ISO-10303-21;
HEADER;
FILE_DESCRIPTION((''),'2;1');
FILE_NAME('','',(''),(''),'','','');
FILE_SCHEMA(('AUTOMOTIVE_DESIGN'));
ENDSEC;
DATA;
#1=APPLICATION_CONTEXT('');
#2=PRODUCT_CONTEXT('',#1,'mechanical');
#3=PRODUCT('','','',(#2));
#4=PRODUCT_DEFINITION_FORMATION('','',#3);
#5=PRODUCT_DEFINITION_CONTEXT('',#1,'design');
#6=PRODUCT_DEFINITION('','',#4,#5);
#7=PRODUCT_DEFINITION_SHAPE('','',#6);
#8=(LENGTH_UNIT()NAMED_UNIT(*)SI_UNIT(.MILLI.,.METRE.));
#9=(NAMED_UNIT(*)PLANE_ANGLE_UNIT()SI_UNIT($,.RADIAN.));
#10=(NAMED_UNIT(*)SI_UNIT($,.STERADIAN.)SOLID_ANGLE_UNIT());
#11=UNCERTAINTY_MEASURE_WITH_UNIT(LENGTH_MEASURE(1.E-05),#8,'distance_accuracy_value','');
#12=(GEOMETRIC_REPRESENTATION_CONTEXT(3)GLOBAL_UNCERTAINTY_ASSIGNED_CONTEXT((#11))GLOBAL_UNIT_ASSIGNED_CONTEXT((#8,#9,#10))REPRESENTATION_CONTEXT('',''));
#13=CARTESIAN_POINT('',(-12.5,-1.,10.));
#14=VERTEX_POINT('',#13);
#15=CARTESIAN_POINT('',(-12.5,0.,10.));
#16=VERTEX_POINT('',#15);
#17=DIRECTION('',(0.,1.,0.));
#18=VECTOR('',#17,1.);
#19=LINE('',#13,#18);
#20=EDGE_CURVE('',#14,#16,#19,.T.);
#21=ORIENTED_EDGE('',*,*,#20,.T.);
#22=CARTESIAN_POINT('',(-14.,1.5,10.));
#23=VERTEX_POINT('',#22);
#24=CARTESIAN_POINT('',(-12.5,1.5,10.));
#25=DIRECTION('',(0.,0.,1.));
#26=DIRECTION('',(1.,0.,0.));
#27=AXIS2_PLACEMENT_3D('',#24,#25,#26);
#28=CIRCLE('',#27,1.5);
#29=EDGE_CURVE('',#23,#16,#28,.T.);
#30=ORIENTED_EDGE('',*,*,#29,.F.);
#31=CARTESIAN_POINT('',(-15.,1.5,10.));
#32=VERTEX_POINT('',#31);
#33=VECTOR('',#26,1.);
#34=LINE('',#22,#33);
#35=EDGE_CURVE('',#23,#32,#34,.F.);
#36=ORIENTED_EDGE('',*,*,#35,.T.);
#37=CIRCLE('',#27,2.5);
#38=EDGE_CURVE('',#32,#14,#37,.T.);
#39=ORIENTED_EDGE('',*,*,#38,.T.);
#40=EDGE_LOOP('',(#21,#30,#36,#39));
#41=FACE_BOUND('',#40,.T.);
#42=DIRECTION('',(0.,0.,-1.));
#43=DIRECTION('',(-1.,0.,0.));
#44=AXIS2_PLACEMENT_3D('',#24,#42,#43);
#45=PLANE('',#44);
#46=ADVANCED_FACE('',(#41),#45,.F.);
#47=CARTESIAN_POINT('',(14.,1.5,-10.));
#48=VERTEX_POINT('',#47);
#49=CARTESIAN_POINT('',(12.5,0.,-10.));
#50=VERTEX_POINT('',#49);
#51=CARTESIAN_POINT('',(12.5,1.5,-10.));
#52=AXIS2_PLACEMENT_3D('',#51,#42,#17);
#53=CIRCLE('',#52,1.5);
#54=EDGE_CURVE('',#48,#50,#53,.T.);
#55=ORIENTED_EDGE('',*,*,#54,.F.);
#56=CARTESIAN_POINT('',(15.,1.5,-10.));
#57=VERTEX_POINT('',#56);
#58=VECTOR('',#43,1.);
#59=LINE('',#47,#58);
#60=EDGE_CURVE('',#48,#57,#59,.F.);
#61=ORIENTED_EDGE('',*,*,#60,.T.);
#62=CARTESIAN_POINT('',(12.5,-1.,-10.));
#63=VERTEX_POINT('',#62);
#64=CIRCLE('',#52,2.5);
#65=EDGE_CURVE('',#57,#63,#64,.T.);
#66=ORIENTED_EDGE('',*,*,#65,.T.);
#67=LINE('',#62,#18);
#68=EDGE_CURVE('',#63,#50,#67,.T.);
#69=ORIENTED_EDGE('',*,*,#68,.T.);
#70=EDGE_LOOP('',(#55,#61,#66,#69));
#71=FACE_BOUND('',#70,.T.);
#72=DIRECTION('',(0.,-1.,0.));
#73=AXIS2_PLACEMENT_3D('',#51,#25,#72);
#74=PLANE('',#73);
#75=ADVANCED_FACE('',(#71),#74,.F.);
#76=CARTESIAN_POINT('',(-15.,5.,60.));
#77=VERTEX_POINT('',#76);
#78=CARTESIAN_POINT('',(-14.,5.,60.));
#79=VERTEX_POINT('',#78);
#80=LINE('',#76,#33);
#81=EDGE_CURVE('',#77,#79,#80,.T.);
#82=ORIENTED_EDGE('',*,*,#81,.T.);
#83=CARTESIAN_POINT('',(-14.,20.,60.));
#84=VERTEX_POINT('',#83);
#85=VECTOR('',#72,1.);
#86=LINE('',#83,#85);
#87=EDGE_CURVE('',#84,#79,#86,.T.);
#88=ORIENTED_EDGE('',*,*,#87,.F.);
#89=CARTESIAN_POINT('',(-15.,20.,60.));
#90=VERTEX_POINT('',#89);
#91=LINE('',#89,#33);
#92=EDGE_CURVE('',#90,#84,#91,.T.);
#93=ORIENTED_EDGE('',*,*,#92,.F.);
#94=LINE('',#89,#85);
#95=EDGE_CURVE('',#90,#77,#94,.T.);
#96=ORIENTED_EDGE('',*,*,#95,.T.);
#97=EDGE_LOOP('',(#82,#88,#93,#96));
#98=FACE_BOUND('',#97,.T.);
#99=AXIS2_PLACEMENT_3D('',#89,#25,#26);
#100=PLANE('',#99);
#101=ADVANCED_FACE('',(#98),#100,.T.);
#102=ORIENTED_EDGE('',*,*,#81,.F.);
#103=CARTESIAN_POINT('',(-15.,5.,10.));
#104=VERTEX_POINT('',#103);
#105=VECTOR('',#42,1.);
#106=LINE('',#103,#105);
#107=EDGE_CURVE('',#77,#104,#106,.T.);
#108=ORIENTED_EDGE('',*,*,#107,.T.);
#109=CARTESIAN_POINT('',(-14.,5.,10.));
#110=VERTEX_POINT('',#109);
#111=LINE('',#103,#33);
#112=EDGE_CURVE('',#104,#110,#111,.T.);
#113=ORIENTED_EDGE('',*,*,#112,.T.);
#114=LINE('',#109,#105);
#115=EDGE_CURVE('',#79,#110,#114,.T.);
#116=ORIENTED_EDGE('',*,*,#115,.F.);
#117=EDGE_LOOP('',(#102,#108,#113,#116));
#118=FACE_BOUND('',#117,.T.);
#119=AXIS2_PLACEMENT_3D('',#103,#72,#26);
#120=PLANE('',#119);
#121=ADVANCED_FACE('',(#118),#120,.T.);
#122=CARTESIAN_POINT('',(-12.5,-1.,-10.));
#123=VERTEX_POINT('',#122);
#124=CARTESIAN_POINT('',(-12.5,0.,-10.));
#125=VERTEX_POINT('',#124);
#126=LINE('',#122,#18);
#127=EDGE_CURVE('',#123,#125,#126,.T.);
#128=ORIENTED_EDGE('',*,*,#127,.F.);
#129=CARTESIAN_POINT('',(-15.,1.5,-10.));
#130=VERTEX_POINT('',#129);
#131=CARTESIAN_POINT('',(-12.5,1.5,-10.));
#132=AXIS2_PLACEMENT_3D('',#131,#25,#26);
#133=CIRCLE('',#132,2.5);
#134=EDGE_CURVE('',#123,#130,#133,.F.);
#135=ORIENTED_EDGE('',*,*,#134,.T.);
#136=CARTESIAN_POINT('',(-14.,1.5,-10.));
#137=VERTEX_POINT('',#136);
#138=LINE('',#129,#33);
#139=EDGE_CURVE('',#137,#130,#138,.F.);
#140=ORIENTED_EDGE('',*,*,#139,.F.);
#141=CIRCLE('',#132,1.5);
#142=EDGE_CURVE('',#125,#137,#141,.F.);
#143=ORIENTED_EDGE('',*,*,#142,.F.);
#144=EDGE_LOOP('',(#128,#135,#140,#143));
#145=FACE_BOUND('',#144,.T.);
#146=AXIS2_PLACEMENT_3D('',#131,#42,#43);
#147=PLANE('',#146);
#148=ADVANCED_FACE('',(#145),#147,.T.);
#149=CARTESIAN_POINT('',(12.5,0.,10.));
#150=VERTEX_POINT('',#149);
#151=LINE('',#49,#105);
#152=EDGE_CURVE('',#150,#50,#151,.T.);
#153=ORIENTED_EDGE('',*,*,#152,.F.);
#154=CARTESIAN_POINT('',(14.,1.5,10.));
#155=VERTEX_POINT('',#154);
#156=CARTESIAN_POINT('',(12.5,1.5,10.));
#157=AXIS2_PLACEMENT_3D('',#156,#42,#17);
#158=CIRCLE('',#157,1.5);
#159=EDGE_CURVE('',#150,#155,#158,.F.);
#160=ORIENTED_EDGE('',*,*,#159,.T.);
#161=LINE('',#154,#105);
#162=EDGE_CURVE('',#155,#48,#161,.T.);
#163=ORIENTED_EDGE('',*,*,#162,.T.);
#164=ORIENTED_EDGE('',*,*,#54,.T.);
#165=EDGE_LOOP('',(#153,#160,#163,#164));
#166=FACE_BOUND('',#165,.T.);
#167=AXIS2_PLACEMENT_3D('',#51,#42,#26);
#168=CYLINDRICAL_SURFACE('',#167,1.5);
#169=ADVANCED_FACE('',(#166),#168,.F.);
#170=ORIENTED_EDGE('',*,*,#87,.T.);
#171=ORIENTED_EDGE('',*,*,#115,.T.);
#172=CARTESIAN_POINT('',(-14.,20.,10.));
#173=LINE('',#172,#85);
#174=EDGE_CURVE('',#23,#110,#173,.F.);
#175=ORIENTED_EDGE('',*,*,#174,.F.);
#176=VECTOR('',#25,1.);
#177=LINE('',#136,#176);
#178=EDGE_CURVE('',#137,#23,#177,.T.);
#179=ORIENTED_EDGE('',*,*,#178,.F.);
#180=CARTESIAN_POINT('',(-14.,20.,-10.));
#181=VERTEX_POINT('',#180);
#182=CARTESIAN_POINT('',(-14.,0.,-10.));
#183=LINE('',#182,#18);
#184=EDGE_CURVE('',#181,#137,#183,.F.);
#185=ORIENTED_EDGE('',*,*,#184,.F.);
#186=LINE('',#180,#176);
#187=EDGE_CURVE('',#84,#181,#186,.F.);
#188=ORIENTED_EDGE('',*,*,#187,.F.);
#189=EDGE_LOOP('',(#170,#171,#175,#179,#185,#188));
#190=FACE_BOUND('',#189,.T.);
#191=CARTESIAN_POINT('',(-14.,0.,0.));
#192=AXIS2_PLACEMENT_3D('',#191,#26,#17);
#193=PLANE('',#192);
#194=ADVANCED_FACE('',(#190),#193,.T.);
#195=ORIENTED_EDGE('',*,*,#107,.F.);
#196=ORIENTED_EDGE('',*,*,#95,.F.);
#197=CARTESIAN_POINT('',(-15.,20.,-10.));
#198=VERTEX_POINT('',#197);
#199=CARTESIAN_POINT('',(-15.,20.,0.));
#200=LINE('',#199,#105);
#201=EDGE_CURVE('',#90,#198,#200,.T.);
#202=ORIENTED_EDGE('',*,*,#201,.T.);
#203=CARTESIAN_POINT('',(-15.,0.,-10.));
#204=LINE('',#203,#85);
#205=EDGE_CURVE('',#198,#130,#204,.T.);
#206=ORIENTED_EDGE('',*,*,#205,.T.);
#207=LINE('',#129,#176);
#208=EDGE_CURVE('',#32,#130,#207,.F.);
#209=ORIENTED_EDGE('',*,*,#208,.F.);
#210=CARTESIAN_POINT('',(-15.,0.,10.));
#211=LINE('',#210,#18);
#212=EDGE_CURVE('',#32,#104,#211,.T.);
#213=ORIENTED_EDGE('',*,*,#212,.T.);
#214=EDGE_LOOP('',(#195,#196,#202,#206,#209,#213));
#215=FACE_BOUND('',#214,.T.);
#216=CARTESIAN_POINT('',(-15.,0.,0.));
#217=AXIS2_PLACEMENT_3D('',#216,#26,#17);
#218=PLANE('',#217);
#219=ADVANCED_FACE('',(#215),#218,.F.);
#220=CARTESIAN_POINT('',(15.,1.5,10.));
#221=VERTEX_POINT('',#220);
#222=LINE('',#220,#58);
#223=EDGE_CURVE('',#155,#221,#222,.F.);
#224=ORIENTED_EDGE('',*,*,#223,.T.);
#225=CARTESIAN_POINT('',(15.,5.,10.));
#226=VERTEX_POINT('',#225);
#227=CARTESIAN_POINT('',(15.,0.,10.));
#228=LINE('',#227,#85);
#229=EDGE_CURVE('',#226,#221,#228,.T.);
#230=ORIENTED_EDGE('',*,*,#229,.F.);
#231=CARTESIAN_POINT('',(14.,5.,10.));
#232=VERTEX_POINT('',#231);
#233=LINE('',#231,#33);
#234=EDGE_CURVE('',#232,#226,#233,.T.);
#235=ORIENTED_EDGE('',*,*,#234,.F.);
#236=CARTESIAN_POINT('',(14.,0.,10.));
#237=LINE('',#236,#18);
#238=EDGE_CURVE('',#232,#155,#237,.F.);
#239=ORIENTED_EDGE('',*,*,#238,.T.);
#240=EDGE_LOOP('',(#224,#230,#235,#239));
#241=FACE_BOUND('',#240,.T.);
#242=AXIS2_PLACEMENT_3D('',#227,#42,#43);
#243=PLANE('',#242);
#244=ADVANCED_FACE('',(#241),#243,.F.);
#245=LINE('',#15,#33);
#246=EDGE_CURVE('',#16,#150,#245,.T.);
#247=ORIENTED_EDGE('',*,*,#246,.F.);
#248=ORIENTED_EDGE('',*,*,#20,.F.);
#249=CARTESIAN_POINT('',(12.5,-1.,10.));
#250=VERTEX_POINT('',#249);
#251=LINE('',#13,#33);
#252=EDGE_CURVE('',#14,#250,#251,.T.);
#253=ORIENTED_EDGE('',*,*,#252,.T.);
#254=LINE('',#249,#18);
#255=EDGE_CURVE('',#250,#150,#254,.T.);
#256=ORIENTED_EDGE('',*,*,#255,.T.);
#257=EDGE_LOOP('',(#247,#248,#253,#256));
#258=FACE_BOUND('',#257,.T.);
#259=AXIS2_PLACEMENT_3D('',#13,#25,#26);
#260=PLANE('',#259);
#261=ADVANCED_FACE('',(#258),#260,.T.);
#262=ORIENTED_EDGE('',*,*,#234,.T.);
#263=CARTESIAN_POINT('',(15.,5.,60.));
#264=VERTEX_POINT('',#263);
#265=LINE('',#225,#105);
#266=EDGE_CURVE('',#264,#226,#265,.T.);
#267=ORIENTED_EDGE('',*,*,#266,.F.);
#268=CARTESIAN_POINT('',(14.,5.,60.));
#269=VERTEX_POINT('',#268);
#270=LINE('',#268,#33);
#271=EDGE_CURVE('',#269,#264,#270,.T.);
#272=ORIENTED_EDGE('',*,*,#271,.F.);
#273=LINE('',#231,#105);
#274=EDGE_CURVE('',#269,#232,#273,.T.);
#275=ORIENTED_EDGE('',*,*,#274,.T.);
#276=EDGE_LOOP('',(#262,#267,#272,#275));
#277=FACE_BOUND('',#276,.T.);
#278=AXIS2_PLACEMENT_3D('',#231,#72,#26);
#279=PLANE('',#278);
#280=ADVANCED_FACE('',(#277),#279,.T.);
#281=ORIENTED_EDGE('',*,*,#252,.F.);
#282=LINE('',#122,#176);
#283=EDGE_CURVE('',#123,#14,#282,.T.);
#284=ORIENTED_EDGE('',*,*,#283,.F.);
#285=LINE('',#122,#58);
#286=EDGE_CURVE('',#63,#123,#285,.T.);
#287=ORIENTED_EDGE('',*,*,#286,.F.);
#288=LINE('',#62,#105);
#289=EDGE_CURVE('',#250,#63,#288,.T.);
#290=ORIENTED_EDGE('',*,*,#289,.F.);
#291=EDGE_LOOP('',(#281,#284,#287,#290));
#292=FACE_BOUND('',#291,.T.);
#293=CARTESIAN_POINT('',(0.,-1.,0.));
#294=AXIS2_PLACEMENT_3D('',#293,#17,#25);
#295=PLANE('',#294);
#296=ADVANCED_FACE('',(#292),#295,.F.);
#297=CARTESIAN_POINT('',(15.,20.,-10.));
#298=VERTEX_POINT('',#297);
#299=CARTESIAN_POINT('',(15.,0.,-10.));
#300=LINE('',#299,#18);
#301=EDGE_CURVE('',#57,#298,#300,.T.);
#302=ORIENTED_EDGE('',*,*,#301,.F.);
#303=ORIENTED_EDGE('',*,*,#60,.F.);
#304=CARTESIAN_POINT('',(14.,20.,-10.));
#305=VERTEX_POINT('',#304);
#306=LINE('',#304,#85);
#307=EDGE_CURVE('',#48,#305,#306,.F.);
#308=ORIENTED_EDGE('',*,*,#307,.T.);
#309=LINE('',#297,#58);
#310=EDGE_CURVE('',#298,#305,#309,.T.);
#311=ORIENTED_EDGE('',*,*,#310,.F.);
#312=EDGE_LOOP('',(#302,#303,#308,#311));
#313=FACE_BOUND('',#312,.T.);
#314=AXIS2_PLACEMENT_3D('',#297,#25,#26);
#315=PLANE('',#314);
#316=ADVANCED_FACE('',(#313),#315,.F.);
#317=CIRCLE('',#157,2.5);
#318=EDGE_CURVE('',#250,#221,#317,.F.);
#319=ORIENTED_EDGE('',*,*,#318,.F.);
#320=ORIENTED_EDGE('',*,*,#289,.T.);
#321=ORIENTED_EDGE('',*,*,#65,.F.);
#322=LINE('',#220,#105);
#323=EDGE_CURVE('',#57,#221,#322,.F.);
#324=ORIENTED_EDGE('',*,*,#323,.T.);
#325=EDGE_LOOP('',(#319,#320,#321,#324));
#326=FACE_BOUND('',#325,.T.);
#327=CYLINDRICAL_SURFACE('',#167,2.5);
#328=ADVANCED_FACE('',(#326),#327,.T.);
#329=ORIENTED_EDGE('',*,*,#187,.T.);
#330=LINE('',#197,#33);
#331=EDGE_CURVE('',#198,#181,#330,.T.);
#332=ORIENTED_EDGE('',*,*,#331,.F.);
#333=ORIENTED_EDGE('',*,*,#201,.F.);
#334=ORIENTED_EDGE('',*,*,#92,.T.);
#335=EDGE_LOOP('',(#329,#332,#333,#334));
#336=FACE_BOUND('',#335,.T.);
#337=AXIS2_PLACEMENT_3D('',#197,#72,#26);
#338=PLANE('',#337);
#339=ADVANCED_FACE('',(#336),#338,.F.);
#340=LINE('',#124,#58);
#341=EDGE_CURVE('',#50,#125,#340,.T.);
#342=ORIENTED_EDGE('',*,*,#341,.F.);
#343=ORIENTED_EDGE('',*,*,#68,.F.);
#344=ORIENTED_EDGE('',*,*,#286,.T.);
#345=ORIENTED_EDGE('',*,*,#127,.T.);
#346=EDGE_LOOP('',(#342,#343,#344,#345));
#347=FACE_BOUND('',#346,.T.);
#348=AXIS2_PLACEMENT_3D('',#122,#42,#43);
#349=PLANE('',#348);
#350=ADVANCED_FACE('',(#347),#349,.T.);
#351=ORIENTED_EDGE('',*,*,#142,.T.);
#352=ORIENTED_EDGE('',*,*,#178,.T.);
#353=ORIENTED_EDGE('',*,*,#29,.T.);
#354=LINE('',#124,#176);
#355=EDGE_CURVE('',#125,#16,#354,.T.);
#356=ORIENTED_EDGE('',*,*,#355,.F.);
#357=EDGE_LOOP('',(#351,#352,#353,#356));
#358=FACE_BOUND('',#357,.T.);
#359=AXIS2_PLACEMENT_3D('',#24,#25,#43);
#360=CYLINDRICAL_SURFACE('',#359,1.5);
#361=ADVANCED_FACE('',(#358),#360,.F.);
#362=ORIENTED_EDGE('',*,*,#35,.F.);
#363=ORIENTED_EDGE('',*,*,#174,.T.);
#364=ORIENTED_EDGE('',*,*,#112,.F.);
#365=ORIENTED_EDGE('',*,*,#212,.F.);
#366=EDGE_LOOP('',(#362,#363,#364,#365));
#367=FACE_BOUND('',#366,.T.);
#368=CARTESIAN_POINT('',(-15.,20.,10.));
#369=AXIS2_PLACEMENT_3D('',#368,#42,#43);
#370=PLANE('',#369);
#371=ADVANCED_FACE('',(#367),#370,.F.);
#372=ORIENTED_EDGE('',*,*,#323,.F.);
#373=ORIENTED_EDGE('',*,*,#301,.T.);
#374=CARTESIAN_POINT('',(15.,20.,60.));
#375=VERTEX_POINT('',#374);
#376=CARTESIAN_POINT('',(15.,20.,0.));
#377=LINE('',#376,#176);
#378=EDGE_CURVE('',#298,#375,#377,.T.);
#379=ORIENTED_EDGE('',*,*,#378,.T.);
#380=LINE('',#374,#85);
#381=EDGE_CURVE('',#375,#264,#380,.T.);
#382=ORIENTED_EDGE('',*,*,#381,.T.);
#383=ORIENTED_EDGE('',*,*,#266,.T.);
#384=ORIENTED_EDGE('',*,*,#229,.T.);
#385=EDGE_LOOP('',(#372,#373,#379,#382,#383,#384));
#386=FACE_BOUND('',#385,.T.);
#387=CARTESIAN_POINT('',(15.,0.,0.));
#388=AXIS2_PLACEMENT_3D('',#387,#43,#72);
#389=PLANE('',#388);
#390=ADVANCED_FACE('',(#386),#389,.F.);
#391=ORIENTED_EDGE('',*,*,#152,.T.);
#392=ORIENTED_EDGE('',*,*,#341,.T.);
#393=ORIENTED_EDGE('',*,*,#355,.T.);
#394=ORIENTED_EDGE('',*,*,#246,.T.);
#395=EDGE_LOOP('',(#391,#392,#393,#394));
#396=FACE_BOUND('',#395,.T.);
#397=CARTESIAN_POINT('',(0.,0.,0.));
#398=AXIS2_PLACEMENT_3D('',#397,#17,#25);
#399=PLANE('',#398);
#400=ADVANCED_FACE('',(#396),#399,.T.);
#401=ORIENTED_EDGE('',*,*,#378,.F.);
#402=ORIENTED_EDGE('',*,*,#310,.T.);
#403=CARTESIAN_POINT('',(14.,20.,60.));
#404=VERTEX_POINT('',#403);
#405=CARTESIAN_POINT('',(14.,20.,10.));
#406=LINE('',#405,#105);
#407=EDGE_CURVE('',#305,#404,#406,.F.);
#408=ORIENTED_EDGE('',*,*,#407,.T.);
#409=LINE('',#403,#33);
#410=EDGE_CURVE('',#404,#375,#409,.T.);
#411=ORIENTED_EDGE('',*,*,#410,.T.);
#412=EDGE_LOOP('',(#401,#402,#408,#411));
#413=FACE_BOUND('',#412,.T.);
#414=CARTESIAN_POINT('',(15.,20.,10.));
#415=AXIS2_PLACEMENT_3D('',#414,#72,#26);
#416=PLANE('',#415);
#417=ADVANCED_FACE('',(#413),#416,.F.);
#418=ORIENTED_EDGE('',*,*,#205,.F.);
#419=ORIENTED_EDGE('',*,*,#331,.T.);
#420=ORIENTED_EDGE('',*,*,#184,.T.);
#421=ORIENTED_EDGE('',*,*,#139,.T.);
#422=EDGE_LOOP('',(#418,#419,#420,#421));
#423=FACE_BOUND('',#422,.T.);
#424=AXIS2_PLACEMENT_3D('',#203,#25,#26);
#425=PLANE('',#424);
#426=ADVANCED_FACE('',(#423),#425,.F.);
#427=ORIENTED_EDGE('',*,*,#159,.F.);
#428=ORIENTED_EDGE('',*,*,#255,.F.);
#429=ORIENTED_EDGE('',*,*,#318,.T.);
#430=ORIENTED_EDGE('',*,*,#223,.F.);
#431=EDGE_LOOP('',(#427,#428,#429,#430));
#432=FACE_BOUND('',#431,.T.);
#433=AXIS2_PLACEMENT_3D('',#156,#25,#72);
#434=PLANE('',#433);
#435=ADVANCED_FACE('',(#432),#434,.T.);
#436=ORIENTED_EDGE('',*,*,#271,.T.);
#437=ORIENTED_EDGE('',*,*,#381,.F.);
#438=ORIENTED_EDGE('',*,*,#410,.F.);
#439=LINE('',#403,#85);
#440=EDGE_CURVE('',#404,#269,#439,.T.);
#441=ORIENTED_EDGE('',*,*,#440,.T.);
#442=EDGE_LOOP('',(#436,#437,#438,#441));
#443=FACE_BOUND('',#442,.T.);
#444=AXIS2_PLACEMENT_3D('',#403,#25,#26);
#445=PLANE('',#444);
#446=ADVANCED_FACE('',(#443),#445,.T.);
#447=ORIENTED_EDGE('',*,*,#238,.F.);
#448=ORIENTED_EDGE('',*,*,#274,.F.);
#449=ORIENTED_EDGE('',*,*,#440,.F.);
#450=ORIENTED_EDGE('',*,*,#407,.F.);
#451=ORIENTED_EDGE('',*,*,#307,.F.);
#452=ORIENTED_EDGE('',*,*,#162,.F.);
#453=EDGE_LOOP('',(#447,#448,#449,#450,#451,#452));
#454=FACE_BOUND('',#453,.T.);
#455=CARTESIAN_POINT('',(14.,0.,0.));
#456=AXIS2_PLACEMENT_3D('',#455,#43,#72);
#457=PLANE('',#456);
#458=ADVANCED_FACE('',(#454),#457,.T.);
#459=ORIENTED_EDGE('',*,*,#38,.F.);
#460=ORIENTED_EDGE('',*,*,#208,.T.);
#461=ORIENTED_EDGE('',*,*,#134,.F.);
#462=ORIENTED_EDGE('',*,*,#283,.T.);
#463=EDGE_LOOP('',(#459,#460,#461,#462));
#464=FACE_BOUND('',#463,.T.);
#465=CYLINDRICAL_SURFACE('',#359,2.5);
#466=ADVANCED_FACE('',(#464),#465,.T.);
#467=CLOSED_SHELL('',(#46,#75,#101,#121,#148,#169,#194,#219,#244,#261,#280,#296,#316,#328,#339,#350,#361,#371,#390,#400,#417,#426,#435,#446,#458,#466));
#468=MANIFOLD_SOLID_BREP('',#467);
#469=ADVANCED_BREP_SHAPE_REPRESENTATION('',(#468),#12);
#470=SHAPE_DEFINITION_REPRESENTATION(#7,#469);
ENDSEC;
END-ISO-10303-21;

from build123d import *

# Parameters (mm, degrees)
SKETCH1_W          = 25
SKETCH1_H          = 20
BASE_FLANGE1_DEPTH = 1
EDGE_FLANGE1_DEPTH = 20
EDGE_FLANGE2_DEPTH = 20
SKETCH15_W         = 50
SKETCH15_H         = 15
TAB1_DEPTH         = 1
SKETCH18_W         = 50
SKETCH18_H         = 15
TAB2_DEPTH         = 1


# Sheet-metal steps are written as plain solids
with BuildPart() as part:
    # Sketch1 → Base-Flange1 (new body)
    with BuildSketch(Plane(origin=(0, 0, 0), x_dir=(1, 0, 0), z_dir=(0, 1, 0))):
        Rectangle(SKETCH1_W, SKETCH1_H)
    extrude(amount=-BASE_FLANGE1_DEPTH)

    # Edge-Flange1 section (across the edge) → Edge-Flange1 (add)
    with BuildSketch(Plane(origin=(-14, 0, -10), x_dir=(1, 0, 0), z_dir=(0, 0, 1))):
        with BuildLine():
            Line((-1, 1.5), (-1, 20))
            Line((-1, 20), (0, 20))
            Line((0, 20), (0, 1.5))
            ThreePointArc((0, 1.5), (0.439339828, 0.439339828), (1.5, 0))
            Line((1.5, 0), (1.5, -1))
            ThreePointArc((1.5, -1), (-0.267766953, -0.267766953), (-1, 1.5))
        make_face()
    extrude(amount=EDGE_FLANGE1_DEPTH)

    # Edge-Flange2 section (across the edge) → Edge-Flange2 (add)
    with BuildSketch(Plane(origin=(14, 0, 10), x_dir=(-1, 0, 0), z_dir=(0, 0, -1))):
        with BuildLine():
            Line((-1, 1.5), (-1, 20))
            Line((-1, 20), (0, 20))
            Line((0, 20), (0, 1.5))
            ThreePointArc((0, 1.5), (0.439339828, 0.439339828), (1.5, 0))
            Line((1.5, 0), (1.5, -1))
            ThreePointArc((1.5, -1), (-0.267766953, -0.267766953), (-1, 1.5))
        make_face()
    extrude(amount=EDGE_FLANGE2_DEPTH)

    # Sketch15 → Tab1 (add)
    with BuildSketch(Plane(origin=(-14, 0, 0), x_dir=(0, 0, -1), z_dir=(1, 0, 0))):
        with Locations((-35, 12.5)):
            Rectangle(SKETCH15_W, SKETCH15_H)
    extrude(amount=-TAB1_DEPTH)

    # Sketch18 → Tab2 (add)
    with BuildSketch(Plane(origin=(15, 0, 0), x_dir=(0, 0, -1), z_dir=(1, 0, 0))):
        with Locations((-35, 12.5)):
            Rectangle(SKETCH18_W, SKETCH18_H)
    extrude(amount=-TAB2_DEPTH)


solid = part.part
